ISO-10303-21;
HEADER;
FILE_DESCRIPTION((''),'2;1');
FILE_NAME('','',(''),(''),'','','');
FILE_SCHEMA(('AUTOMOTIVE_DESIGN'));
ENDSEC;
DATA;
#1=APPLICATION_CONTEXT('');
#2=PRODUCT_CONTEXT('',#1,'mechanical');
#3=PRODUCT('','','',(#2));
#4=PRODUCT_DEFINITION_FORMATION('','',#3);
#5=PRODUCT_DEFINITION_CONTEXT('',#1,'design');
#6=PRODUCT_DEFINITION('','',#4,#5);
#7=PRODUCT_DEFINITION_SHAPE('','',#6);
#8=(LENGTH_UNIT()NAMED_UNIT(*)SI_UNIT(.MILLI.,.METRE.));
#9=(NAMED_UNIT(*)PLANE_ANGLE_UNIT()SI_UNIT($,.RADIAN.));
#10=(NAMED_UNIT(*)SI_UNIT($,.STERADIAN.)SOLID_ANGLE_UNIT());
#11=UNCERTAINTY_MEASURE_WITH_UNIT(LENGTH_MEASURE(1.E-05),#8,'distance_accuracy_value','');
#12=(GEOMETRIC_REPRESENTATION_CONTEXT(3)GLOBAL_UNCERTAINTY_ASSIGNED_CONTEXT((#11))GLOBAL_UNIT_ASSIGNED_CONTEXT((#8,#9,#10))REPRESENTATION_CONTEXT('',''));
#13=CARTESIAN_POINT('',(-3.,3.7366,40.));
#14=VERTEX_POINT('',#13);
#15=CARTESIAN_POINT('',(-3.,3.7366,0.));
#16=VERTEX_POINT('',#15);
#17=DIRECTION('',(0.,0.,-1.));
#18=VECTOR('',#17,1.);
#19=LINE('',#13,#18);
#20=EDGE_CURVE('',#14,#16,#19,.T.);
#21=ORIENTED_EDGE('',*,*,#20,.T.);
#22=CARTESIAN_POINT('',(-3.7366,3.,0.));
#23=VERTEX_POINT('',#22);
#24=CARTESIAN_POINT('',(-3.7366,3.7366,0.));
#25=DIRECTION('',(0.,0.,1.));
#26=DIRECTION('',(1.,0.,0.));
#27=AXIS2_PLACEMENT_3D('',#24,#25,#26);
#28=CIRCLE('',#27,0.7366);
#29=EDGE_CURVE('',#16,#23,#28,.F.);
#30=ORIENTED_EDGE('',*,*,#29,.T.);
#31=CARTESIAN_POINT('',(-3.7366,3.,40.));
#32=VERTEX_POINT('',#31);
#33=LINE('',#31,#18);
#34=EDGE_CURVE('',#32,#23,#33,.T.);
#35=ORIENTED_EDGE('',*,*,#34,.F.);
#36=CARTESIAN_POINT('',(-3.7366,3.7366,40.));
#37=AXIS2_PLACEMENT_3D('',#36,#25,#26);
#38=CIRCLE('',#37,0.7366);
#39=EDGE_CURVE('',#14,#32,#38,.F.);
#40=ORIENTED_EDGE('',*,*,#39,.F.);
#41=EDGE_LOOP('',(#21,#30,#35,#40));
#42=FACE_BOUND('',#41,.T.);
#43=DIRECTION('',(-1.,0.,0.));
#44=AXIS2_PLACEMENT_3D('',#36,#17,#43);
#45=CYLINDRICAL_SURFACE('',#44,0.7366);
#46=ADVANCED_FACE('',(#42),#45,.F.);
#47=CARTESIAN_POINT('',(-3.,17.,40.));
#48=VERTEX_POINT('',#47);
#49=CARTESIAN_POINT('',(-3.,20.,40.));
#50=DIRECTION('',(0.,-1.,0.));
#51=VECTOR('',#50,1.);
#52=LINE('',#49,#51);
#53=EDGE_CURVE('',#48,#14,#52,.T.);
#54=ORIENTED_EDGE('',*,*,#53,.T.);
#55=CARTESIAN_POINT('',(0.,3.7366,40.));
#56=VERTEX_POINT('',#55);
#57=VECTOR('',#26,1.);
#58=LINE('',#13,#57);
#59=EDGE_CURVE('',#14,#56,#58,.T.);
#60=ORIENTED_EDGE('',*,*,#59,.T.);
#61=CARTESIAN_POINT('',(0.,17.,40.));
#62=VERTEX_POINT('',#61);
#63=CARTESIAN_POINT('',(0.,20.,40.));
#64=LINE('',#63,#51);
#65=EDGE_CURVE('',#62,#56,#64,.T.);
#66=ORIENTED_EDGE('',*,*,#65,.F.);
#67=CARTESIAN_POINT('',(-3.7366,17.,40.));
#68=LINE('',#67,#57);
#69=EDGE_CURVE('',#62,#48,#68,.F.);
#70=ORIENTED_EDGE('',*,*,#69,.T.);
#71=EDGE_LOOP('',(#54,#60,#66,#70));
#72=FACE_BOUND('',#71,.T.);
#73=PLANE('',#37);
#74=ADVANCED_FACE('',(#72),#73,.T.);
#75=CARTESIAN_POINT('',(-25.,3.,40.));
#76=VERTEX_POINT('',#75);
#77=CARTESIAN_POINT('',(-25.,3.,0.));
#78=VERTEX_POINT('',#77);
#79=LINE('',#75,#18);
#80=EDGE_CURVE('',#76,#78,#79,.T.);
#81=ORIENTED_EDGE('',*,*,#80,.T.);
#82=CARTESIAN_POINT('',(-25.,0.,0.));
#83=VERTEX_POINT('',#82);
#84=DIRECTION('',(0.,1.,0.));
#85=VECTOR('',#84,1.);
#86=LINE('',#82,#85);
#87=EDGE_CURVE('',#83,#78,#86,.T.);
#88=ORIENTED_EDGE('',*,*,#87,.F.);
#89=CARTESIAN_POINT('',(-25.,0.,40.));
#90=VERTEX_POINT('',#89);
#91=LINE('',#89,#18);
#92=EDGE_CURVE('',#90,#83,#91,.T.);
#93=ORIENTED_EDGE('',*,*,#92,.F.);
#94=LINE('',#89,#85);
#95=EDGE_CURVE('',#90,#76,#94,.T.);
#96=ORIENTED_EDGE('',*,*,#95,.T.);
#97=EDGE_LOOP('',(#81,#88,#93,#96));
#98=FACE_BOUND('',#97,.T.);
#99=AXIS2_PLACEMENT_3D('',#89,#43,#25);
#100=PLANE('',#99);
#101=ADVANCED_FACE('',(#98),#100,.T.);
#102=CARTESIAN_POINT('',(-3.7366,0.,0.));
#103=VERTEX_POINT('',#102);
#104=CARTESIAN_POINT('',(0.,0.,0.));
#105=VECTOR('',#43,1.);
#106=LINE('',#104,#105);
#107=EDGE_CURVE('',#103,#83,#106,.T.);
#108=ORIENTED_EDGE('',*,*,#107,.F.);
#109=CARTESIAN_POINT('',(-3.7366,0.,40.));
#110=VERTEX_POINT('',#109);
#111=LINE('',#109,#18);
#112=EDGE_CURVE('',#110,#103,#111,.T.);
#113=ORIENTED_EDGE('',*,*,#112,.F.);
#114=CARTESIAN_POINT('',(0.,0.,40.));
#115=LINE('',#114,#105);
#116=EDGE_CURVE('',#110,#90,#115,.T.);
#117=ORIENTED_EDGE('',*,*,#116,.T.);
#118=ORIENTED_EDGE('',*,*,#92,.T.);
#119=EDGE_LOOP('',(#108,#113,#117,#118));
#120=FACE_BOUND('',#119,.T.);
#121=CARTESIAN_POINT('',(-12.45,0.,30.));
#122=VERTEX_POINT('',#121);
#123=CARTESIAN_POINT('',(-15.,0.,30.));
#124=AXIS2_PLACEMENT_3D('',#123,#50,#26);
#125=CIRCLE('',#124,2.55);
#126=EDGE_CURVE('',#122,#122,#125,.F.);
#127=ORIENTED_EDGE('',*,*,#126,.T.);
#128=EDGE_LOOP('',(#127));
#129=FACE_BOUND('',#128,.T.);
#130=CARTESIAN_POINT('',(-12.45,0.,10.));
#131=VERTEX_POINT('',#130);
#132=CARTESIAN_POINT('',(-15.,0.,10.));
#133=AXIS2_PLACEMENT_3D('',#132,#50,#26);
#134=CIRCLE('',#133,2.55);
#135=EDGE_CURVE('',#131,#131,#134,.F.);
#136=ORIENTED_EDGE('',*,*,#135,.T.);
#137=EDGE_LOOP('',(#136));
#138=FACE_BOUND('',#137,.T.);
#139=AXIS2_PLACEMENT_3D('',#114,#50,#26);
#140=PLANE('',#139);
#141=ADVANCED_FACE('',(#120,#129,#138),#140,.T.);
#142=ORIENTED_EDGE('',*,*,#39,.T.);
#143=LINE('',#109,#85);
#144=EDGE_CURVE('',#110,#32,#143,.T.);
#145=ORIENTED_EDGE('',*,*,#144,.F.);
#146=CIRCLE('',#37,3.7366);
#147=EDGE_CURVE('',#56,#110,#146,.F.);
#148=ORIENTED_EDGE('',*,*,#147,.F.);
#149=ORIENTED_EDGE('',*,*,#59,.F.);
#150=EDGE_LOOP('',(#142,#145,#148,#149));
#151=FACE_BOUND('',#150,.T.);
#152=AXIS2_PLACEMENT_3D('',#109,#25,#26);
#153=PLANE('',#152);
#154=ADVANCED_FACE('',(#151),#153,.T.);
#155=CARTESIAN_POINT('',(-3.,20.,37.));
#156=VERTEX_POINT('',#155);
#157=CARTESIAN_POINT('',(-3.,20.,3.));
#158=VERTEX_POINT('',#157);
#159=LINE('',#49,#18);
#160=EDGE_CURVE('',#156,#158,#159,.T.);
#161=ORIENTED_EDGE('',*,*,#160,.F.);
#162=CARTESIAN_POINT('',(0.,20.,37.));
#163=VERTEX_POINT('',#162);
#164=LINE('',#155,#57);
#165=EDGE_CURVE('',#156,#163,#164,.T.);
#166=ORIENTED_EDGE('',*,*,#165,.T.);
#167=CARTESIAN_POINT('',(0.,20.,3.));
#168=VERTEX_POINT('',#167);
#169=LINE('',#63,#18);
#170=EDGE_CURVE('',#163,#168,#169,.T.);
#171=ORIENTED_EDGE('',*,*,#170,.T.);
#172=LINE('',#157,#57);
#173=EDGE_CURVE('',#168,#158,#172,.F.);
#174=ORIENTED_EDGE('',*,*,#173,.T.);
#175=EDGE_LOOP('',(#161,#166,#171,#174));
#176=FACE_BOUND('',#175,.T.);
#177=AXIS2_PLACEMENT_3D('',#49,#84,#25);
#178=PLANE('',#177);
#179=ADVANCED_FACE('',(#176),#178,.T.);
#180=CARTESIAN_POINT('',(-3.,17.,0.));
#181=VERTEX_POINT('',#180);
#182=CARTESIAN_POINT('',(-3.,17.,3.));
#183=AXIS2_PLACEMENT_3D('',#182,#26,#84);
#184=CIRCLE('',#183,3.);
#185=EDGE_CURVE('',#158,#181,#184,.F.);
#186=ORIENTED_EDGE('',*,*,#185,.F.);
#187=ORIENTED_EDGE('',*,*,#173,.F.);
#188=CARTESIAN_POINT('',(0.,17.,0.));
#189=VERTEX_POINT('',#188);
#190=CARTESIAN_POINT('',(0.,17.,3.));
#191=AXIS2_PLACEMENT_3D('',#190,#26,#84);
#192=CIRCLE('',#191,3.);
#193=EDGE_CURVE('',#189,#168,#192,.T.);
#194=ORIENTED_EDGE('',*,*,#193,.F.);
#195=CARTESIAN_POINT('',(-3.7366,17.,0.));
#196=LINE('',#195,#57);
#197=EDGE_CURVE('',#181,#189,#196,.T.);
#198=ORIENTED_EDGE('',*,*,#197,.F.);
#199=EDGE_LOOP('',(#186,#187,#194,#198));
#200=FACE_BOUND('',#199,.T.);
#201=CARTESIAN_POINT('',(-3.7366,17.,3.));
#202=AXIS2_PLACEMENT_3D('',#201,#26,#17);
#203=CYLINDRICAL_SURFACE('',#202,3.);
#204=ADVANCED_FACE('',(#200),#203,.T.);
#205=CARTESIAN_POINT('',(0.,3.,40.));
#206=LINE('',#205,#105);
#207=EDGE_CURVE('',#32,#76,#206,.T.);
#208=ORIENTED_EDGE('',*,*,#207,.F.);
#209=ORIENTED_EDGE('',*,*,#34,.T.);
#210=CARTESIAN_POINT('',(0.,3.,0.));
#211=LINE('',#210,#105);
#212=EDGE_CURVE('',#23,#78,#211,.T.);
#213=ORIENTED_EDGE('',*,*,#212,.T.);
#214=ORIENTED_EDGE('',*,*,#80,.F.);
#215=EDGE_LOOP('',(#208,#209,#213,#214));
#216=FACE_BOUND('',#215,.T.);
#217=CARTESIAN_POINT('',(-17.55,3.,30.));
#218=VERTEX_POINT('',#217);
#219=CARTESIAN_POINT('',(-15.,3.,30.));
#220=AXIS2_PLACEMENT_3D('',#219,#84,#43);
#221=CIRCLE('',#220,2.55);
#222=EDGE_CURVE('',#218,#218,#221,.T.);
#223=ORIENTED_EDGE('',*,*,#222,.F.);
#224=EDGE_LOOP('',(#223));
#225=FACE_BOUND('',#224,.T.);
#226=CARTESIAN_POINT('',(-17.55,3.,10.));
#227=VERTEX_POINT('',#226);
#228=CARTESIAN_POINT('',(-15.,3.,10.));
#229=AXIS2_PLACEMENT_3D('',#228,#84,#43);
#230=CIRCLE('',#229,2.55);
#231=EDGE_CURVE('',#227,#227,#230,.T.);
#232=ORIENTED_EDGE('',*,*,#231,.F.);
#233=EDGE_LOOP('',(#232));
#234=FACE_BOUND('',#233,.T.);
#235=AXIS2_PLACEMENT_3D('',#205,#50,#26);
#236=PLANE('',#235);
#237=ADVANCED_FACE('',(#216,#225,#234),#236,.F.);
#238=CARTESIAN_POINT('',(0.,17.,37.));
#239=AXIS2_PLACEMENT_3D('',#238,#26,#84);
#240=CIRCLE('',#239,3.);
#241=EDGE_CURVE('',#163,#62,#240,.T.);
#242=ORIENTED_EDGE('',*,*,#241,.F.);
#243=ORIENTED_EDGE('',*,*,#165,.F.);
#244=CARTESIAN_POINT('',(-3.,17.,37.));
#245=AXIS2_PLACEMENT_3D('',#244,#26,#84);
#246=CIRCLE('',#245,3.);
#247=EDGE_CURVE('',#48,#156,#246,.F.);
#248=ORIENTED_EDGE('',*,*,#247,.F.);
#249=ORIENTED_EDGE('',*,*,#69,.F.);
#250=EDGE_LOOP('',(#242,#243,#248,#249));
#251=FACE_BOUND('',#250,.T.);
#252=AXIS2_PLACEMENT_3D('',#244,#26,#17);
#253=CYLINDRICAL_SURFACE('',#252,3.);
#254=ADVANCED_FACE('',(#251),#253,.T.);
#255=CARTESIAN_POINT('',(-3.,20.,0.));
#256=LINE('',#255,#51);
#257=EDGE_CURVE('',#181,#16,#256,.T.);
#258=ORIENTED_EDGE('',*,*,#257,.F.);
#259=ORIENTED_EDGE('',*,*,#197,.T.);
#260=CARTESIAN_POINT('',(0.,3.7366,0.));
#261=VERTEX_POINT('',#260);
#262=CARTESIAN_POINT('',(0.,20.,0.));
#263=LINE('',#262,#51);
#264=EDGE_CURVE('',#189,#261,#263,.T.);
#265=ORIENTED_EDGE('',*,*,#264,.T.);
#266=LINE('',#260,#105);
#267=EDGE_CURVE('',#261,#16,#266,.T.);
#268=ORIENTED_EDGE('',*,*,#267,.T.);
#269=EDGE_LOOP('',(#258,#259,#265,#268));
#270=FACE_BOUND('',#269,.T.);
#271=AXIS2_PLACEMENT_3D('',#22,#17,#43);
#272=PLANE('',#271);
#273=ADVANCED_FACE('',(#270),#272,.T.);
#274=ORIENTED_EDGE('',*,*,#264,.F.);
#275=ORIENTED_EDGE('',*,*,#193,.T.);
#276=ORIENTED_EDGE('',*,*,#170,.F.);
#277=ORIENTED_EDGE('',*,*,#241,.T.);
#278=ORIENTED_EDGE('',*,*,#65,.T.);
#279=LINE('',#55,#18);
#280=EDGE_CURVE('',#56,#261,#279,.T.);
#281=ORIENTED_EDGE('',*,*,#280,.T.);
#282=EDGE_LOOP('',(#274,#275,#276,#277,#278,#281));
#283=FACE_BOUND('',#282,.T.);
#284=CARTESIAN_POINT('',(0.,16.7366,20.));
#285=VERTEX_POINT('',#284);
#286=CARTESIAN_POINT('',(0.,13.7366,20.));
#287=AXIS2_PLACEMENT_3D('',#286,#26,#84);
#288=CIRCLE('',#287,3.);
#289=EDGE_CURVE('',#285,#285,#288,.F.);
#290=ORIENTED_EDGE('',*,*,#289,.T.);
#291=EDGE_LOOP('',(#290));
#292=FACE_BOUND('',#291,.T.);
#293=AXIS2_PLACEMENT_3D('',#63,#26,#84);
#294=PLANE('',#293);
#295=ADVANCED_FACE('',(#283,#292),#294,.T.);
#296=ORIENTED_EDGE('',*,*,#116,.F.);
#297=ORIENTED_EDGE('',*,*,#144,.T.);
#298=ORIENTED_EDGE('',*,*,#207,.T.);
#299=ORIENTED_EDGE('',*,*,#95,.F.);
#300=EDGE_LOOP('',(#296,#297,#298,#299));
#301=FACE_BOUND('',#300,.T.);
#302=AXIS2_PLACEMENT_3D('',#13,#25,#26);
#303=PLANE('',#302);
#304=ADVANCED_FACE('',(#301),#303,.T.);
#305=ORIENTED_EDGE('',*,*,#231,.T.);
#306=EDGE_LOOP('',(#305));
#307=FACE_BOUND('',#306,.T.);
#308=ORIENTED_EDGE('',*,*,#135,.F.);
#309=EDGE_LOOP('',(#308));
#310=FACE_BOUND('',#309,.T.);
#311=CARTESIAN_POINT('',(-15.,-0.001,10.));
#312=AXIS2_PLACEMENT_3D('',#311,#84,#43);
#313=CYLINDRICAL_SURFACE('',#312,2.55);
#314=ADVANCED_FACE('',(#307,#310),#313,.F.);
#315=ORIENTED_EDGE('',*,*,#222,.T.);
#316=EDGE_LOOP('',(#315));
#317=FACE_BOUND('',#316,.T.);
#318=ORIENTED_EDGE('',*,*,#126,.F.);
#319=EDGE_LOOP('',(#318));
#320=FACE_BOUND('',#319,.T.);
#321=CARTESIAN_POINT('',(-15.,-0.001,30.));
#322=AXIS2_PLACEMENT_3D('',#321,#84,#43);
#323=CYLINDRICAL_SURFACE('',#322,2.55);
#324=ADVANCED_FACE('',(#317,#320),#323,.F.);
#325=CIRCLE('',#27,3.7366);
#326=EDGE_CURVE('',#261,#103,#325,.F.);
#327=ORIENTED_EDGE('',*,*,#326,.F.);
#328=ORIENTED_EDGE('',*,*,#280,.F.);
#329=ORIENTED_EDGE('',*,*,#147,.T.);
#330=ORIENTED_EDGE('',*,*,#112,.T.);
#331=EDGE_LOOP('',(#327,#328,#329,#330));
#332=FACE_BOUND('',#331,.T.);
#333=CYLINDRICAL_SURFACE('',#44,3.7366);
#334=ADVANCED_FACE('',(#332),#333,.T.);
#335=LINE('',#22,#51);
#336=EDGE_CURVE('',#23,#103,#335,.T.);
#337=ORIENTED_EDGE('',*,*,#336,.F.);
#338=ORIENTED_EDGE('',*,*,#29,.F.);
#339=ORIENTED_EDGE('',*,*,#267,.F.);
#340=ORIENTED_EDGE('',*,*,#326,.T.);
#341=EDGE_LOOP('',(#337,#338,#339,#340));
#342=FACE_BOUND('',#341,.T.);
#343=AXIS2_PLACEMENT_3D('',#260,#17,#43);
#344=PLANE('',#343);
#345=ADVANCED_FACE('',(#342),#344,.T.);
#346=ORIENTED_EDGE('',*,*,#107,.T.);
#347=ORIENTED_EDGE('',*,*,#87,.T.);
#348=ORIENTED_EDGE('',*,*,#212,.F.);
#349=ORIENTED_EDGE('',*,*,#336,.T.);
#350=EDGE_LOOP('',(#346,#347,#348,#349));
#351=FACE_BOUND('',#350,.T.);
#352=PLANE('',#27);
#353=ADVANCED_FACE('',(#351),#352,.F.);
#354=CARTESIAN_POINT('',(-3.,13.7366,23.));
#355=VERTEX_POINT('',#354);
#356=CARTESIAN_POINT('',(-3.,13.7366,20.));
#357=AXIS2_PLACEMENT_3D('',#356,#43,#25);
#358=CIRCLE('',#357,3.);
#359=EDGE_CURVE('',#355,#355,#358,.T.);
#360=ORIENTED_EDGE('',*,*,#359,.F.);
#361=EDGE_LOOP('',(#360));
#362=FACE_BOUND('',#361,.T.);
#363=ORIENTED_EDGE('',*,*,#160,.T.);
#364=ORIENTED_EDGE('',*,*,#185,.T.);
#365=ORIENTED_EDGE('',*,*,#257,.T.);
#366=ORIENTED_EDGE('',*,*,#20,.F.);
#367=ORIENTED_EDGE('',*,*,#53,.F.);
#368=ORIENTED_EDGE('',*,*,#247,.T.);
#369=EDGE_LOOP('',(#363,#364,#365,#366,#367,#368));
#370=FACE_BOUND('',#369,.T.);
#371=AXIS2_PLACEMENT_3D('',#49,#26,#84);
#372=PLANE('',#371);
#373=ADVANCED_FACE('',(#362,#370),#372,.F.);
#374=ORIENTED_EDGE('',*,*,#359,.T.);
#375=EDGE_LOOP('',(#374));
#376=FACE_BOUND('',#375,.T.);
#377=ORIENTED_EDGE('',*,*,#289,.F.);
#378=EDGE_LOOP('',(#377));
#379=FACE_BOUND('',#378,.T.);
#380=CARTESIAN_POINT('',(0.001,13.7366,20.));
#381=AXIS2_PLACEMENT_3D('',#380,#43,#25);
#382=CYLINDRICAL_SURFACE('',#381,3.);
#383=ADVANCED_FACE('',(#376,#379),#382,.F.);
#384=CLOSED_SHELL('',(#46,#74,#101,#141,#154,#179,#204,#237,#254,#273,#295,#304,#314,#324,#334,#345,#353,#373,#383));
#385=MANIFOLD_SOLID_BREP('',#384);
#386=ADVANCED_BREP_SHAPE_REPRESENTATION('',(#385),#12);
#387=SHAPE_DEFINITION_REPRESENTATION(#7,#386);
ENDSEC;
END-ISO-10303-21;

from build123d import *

# Parameters (mm, degrees)
BASE_FLANGE1_DEPTH = 40
CUT_EXTRUDE1_REACH = 52.14
SKETCH6_R          = 2.55
CUT_EXTRUDE2_REACH = 51.84
SKETCH7_R          = 3
FILLET1_R          = 3


# Sheet-metal steps are written as plain solids
with BuildPart() as part:
    # Sketch1 → Base-Flange1 (new body)
    with BuildSketch(Plane.XY):
        with BuildLine():
            Line((0, 20), (0, 3.7366))
            ThreePointArc((0, 3.7366), (-1.094424801, 1.094424801), (-3.7366, 0))
            Line((-3.7366, 0), (-25, 0))
            Line((-25, 0), (-25, 3))
            Line((-25, 3), (-3.7366, 3))
            ThreePointArc((-3.7366, 3), (-3.215745145, 3.215745145), (-3, 3.7366))
            Line((-3, 3.7366), (-3, 20))
            Line((-3, 20), (0, 20))
        make_face()
    extrude(amount=BASE_FLANGE1_DEPTH)

    # Sketch6 → Cut-Extrude1 (cut, up to next)
    with BuildSketch(Plane(origin=(0, 3, 0), x_dir=(1, 0, 0), z_dir=(0, 1, 0)), mode=Mode.PRIVATE) as cut_extrude1_sk1:
        with Locations(Location((-15, -10, 0), (0, 0, 180))):
            Circle(SKETCH6_R)
    cut_extrude1_tool1 = extrude(cut_extrude1_sk1.sketch, amount=-CUT_EXTRUDE1_REACH, mode=Mode.PRIVATE) & part.part
    # Sketch6 → Cut-Extrude1 (cut, up to next)
    with BuildSketch(Plane(origin=(0, 3, 0), x_dir=(1, 0, 0), z_dir=(0, 1, 0)), mode=Mode.PRIVATE) as cut_extrude1_sk2:
        with Locations(Location((-15, -30, 0), (0, 0, 180))):
            Circle(SKETCH6_R)
    cut_extrude1_tool2 = extrude(cut_extrude1_sk2.sketch, amount=-CUT_EXTRUDE1_REACH, mode=Mode.PRIVATE) & part.part
    add(cut_extrude1_tool1.solids().sort_by_distance((-15, 3, 10))[0], mode=Mode.SUBTRACT)
    add(cut_extrude1_tool2.solids().sort_by_distance((-15, 3, 30))[0], mode=Mode.SUBTRACT)

    # Sketch7 → Cut-Extrude2 (cut, up to next)
    with BuildSketch(Plane.ZY.offset(3), mode=Mode.PRIVATE) as cut_extrude2_sk1:
        with Locations((20, 13.7366)):
            Circle(SKETCH7_R)
    cut_extrude2_tool1 = extrude(cut_extrude2_sk1.sketch, amount=-CUT_EXTRUDE2_REACH, mode=Mode.PRIVATE) & part.part
    add(cut_extrude2_tool1.solids().sort_by_distance((-3, 13.7366, 20))[0], mode=Mode.SUBTRACT)

    # Fillet1
    fillet1_edges = [part.edges().sort_by_distance(p)[0] for p in [
        (-1.5, 20, 40),
        (-1.5, 20, 0),
    ]]
    fillet(fillet1_edges, radius=FILLET1_R)


solid = part.part
